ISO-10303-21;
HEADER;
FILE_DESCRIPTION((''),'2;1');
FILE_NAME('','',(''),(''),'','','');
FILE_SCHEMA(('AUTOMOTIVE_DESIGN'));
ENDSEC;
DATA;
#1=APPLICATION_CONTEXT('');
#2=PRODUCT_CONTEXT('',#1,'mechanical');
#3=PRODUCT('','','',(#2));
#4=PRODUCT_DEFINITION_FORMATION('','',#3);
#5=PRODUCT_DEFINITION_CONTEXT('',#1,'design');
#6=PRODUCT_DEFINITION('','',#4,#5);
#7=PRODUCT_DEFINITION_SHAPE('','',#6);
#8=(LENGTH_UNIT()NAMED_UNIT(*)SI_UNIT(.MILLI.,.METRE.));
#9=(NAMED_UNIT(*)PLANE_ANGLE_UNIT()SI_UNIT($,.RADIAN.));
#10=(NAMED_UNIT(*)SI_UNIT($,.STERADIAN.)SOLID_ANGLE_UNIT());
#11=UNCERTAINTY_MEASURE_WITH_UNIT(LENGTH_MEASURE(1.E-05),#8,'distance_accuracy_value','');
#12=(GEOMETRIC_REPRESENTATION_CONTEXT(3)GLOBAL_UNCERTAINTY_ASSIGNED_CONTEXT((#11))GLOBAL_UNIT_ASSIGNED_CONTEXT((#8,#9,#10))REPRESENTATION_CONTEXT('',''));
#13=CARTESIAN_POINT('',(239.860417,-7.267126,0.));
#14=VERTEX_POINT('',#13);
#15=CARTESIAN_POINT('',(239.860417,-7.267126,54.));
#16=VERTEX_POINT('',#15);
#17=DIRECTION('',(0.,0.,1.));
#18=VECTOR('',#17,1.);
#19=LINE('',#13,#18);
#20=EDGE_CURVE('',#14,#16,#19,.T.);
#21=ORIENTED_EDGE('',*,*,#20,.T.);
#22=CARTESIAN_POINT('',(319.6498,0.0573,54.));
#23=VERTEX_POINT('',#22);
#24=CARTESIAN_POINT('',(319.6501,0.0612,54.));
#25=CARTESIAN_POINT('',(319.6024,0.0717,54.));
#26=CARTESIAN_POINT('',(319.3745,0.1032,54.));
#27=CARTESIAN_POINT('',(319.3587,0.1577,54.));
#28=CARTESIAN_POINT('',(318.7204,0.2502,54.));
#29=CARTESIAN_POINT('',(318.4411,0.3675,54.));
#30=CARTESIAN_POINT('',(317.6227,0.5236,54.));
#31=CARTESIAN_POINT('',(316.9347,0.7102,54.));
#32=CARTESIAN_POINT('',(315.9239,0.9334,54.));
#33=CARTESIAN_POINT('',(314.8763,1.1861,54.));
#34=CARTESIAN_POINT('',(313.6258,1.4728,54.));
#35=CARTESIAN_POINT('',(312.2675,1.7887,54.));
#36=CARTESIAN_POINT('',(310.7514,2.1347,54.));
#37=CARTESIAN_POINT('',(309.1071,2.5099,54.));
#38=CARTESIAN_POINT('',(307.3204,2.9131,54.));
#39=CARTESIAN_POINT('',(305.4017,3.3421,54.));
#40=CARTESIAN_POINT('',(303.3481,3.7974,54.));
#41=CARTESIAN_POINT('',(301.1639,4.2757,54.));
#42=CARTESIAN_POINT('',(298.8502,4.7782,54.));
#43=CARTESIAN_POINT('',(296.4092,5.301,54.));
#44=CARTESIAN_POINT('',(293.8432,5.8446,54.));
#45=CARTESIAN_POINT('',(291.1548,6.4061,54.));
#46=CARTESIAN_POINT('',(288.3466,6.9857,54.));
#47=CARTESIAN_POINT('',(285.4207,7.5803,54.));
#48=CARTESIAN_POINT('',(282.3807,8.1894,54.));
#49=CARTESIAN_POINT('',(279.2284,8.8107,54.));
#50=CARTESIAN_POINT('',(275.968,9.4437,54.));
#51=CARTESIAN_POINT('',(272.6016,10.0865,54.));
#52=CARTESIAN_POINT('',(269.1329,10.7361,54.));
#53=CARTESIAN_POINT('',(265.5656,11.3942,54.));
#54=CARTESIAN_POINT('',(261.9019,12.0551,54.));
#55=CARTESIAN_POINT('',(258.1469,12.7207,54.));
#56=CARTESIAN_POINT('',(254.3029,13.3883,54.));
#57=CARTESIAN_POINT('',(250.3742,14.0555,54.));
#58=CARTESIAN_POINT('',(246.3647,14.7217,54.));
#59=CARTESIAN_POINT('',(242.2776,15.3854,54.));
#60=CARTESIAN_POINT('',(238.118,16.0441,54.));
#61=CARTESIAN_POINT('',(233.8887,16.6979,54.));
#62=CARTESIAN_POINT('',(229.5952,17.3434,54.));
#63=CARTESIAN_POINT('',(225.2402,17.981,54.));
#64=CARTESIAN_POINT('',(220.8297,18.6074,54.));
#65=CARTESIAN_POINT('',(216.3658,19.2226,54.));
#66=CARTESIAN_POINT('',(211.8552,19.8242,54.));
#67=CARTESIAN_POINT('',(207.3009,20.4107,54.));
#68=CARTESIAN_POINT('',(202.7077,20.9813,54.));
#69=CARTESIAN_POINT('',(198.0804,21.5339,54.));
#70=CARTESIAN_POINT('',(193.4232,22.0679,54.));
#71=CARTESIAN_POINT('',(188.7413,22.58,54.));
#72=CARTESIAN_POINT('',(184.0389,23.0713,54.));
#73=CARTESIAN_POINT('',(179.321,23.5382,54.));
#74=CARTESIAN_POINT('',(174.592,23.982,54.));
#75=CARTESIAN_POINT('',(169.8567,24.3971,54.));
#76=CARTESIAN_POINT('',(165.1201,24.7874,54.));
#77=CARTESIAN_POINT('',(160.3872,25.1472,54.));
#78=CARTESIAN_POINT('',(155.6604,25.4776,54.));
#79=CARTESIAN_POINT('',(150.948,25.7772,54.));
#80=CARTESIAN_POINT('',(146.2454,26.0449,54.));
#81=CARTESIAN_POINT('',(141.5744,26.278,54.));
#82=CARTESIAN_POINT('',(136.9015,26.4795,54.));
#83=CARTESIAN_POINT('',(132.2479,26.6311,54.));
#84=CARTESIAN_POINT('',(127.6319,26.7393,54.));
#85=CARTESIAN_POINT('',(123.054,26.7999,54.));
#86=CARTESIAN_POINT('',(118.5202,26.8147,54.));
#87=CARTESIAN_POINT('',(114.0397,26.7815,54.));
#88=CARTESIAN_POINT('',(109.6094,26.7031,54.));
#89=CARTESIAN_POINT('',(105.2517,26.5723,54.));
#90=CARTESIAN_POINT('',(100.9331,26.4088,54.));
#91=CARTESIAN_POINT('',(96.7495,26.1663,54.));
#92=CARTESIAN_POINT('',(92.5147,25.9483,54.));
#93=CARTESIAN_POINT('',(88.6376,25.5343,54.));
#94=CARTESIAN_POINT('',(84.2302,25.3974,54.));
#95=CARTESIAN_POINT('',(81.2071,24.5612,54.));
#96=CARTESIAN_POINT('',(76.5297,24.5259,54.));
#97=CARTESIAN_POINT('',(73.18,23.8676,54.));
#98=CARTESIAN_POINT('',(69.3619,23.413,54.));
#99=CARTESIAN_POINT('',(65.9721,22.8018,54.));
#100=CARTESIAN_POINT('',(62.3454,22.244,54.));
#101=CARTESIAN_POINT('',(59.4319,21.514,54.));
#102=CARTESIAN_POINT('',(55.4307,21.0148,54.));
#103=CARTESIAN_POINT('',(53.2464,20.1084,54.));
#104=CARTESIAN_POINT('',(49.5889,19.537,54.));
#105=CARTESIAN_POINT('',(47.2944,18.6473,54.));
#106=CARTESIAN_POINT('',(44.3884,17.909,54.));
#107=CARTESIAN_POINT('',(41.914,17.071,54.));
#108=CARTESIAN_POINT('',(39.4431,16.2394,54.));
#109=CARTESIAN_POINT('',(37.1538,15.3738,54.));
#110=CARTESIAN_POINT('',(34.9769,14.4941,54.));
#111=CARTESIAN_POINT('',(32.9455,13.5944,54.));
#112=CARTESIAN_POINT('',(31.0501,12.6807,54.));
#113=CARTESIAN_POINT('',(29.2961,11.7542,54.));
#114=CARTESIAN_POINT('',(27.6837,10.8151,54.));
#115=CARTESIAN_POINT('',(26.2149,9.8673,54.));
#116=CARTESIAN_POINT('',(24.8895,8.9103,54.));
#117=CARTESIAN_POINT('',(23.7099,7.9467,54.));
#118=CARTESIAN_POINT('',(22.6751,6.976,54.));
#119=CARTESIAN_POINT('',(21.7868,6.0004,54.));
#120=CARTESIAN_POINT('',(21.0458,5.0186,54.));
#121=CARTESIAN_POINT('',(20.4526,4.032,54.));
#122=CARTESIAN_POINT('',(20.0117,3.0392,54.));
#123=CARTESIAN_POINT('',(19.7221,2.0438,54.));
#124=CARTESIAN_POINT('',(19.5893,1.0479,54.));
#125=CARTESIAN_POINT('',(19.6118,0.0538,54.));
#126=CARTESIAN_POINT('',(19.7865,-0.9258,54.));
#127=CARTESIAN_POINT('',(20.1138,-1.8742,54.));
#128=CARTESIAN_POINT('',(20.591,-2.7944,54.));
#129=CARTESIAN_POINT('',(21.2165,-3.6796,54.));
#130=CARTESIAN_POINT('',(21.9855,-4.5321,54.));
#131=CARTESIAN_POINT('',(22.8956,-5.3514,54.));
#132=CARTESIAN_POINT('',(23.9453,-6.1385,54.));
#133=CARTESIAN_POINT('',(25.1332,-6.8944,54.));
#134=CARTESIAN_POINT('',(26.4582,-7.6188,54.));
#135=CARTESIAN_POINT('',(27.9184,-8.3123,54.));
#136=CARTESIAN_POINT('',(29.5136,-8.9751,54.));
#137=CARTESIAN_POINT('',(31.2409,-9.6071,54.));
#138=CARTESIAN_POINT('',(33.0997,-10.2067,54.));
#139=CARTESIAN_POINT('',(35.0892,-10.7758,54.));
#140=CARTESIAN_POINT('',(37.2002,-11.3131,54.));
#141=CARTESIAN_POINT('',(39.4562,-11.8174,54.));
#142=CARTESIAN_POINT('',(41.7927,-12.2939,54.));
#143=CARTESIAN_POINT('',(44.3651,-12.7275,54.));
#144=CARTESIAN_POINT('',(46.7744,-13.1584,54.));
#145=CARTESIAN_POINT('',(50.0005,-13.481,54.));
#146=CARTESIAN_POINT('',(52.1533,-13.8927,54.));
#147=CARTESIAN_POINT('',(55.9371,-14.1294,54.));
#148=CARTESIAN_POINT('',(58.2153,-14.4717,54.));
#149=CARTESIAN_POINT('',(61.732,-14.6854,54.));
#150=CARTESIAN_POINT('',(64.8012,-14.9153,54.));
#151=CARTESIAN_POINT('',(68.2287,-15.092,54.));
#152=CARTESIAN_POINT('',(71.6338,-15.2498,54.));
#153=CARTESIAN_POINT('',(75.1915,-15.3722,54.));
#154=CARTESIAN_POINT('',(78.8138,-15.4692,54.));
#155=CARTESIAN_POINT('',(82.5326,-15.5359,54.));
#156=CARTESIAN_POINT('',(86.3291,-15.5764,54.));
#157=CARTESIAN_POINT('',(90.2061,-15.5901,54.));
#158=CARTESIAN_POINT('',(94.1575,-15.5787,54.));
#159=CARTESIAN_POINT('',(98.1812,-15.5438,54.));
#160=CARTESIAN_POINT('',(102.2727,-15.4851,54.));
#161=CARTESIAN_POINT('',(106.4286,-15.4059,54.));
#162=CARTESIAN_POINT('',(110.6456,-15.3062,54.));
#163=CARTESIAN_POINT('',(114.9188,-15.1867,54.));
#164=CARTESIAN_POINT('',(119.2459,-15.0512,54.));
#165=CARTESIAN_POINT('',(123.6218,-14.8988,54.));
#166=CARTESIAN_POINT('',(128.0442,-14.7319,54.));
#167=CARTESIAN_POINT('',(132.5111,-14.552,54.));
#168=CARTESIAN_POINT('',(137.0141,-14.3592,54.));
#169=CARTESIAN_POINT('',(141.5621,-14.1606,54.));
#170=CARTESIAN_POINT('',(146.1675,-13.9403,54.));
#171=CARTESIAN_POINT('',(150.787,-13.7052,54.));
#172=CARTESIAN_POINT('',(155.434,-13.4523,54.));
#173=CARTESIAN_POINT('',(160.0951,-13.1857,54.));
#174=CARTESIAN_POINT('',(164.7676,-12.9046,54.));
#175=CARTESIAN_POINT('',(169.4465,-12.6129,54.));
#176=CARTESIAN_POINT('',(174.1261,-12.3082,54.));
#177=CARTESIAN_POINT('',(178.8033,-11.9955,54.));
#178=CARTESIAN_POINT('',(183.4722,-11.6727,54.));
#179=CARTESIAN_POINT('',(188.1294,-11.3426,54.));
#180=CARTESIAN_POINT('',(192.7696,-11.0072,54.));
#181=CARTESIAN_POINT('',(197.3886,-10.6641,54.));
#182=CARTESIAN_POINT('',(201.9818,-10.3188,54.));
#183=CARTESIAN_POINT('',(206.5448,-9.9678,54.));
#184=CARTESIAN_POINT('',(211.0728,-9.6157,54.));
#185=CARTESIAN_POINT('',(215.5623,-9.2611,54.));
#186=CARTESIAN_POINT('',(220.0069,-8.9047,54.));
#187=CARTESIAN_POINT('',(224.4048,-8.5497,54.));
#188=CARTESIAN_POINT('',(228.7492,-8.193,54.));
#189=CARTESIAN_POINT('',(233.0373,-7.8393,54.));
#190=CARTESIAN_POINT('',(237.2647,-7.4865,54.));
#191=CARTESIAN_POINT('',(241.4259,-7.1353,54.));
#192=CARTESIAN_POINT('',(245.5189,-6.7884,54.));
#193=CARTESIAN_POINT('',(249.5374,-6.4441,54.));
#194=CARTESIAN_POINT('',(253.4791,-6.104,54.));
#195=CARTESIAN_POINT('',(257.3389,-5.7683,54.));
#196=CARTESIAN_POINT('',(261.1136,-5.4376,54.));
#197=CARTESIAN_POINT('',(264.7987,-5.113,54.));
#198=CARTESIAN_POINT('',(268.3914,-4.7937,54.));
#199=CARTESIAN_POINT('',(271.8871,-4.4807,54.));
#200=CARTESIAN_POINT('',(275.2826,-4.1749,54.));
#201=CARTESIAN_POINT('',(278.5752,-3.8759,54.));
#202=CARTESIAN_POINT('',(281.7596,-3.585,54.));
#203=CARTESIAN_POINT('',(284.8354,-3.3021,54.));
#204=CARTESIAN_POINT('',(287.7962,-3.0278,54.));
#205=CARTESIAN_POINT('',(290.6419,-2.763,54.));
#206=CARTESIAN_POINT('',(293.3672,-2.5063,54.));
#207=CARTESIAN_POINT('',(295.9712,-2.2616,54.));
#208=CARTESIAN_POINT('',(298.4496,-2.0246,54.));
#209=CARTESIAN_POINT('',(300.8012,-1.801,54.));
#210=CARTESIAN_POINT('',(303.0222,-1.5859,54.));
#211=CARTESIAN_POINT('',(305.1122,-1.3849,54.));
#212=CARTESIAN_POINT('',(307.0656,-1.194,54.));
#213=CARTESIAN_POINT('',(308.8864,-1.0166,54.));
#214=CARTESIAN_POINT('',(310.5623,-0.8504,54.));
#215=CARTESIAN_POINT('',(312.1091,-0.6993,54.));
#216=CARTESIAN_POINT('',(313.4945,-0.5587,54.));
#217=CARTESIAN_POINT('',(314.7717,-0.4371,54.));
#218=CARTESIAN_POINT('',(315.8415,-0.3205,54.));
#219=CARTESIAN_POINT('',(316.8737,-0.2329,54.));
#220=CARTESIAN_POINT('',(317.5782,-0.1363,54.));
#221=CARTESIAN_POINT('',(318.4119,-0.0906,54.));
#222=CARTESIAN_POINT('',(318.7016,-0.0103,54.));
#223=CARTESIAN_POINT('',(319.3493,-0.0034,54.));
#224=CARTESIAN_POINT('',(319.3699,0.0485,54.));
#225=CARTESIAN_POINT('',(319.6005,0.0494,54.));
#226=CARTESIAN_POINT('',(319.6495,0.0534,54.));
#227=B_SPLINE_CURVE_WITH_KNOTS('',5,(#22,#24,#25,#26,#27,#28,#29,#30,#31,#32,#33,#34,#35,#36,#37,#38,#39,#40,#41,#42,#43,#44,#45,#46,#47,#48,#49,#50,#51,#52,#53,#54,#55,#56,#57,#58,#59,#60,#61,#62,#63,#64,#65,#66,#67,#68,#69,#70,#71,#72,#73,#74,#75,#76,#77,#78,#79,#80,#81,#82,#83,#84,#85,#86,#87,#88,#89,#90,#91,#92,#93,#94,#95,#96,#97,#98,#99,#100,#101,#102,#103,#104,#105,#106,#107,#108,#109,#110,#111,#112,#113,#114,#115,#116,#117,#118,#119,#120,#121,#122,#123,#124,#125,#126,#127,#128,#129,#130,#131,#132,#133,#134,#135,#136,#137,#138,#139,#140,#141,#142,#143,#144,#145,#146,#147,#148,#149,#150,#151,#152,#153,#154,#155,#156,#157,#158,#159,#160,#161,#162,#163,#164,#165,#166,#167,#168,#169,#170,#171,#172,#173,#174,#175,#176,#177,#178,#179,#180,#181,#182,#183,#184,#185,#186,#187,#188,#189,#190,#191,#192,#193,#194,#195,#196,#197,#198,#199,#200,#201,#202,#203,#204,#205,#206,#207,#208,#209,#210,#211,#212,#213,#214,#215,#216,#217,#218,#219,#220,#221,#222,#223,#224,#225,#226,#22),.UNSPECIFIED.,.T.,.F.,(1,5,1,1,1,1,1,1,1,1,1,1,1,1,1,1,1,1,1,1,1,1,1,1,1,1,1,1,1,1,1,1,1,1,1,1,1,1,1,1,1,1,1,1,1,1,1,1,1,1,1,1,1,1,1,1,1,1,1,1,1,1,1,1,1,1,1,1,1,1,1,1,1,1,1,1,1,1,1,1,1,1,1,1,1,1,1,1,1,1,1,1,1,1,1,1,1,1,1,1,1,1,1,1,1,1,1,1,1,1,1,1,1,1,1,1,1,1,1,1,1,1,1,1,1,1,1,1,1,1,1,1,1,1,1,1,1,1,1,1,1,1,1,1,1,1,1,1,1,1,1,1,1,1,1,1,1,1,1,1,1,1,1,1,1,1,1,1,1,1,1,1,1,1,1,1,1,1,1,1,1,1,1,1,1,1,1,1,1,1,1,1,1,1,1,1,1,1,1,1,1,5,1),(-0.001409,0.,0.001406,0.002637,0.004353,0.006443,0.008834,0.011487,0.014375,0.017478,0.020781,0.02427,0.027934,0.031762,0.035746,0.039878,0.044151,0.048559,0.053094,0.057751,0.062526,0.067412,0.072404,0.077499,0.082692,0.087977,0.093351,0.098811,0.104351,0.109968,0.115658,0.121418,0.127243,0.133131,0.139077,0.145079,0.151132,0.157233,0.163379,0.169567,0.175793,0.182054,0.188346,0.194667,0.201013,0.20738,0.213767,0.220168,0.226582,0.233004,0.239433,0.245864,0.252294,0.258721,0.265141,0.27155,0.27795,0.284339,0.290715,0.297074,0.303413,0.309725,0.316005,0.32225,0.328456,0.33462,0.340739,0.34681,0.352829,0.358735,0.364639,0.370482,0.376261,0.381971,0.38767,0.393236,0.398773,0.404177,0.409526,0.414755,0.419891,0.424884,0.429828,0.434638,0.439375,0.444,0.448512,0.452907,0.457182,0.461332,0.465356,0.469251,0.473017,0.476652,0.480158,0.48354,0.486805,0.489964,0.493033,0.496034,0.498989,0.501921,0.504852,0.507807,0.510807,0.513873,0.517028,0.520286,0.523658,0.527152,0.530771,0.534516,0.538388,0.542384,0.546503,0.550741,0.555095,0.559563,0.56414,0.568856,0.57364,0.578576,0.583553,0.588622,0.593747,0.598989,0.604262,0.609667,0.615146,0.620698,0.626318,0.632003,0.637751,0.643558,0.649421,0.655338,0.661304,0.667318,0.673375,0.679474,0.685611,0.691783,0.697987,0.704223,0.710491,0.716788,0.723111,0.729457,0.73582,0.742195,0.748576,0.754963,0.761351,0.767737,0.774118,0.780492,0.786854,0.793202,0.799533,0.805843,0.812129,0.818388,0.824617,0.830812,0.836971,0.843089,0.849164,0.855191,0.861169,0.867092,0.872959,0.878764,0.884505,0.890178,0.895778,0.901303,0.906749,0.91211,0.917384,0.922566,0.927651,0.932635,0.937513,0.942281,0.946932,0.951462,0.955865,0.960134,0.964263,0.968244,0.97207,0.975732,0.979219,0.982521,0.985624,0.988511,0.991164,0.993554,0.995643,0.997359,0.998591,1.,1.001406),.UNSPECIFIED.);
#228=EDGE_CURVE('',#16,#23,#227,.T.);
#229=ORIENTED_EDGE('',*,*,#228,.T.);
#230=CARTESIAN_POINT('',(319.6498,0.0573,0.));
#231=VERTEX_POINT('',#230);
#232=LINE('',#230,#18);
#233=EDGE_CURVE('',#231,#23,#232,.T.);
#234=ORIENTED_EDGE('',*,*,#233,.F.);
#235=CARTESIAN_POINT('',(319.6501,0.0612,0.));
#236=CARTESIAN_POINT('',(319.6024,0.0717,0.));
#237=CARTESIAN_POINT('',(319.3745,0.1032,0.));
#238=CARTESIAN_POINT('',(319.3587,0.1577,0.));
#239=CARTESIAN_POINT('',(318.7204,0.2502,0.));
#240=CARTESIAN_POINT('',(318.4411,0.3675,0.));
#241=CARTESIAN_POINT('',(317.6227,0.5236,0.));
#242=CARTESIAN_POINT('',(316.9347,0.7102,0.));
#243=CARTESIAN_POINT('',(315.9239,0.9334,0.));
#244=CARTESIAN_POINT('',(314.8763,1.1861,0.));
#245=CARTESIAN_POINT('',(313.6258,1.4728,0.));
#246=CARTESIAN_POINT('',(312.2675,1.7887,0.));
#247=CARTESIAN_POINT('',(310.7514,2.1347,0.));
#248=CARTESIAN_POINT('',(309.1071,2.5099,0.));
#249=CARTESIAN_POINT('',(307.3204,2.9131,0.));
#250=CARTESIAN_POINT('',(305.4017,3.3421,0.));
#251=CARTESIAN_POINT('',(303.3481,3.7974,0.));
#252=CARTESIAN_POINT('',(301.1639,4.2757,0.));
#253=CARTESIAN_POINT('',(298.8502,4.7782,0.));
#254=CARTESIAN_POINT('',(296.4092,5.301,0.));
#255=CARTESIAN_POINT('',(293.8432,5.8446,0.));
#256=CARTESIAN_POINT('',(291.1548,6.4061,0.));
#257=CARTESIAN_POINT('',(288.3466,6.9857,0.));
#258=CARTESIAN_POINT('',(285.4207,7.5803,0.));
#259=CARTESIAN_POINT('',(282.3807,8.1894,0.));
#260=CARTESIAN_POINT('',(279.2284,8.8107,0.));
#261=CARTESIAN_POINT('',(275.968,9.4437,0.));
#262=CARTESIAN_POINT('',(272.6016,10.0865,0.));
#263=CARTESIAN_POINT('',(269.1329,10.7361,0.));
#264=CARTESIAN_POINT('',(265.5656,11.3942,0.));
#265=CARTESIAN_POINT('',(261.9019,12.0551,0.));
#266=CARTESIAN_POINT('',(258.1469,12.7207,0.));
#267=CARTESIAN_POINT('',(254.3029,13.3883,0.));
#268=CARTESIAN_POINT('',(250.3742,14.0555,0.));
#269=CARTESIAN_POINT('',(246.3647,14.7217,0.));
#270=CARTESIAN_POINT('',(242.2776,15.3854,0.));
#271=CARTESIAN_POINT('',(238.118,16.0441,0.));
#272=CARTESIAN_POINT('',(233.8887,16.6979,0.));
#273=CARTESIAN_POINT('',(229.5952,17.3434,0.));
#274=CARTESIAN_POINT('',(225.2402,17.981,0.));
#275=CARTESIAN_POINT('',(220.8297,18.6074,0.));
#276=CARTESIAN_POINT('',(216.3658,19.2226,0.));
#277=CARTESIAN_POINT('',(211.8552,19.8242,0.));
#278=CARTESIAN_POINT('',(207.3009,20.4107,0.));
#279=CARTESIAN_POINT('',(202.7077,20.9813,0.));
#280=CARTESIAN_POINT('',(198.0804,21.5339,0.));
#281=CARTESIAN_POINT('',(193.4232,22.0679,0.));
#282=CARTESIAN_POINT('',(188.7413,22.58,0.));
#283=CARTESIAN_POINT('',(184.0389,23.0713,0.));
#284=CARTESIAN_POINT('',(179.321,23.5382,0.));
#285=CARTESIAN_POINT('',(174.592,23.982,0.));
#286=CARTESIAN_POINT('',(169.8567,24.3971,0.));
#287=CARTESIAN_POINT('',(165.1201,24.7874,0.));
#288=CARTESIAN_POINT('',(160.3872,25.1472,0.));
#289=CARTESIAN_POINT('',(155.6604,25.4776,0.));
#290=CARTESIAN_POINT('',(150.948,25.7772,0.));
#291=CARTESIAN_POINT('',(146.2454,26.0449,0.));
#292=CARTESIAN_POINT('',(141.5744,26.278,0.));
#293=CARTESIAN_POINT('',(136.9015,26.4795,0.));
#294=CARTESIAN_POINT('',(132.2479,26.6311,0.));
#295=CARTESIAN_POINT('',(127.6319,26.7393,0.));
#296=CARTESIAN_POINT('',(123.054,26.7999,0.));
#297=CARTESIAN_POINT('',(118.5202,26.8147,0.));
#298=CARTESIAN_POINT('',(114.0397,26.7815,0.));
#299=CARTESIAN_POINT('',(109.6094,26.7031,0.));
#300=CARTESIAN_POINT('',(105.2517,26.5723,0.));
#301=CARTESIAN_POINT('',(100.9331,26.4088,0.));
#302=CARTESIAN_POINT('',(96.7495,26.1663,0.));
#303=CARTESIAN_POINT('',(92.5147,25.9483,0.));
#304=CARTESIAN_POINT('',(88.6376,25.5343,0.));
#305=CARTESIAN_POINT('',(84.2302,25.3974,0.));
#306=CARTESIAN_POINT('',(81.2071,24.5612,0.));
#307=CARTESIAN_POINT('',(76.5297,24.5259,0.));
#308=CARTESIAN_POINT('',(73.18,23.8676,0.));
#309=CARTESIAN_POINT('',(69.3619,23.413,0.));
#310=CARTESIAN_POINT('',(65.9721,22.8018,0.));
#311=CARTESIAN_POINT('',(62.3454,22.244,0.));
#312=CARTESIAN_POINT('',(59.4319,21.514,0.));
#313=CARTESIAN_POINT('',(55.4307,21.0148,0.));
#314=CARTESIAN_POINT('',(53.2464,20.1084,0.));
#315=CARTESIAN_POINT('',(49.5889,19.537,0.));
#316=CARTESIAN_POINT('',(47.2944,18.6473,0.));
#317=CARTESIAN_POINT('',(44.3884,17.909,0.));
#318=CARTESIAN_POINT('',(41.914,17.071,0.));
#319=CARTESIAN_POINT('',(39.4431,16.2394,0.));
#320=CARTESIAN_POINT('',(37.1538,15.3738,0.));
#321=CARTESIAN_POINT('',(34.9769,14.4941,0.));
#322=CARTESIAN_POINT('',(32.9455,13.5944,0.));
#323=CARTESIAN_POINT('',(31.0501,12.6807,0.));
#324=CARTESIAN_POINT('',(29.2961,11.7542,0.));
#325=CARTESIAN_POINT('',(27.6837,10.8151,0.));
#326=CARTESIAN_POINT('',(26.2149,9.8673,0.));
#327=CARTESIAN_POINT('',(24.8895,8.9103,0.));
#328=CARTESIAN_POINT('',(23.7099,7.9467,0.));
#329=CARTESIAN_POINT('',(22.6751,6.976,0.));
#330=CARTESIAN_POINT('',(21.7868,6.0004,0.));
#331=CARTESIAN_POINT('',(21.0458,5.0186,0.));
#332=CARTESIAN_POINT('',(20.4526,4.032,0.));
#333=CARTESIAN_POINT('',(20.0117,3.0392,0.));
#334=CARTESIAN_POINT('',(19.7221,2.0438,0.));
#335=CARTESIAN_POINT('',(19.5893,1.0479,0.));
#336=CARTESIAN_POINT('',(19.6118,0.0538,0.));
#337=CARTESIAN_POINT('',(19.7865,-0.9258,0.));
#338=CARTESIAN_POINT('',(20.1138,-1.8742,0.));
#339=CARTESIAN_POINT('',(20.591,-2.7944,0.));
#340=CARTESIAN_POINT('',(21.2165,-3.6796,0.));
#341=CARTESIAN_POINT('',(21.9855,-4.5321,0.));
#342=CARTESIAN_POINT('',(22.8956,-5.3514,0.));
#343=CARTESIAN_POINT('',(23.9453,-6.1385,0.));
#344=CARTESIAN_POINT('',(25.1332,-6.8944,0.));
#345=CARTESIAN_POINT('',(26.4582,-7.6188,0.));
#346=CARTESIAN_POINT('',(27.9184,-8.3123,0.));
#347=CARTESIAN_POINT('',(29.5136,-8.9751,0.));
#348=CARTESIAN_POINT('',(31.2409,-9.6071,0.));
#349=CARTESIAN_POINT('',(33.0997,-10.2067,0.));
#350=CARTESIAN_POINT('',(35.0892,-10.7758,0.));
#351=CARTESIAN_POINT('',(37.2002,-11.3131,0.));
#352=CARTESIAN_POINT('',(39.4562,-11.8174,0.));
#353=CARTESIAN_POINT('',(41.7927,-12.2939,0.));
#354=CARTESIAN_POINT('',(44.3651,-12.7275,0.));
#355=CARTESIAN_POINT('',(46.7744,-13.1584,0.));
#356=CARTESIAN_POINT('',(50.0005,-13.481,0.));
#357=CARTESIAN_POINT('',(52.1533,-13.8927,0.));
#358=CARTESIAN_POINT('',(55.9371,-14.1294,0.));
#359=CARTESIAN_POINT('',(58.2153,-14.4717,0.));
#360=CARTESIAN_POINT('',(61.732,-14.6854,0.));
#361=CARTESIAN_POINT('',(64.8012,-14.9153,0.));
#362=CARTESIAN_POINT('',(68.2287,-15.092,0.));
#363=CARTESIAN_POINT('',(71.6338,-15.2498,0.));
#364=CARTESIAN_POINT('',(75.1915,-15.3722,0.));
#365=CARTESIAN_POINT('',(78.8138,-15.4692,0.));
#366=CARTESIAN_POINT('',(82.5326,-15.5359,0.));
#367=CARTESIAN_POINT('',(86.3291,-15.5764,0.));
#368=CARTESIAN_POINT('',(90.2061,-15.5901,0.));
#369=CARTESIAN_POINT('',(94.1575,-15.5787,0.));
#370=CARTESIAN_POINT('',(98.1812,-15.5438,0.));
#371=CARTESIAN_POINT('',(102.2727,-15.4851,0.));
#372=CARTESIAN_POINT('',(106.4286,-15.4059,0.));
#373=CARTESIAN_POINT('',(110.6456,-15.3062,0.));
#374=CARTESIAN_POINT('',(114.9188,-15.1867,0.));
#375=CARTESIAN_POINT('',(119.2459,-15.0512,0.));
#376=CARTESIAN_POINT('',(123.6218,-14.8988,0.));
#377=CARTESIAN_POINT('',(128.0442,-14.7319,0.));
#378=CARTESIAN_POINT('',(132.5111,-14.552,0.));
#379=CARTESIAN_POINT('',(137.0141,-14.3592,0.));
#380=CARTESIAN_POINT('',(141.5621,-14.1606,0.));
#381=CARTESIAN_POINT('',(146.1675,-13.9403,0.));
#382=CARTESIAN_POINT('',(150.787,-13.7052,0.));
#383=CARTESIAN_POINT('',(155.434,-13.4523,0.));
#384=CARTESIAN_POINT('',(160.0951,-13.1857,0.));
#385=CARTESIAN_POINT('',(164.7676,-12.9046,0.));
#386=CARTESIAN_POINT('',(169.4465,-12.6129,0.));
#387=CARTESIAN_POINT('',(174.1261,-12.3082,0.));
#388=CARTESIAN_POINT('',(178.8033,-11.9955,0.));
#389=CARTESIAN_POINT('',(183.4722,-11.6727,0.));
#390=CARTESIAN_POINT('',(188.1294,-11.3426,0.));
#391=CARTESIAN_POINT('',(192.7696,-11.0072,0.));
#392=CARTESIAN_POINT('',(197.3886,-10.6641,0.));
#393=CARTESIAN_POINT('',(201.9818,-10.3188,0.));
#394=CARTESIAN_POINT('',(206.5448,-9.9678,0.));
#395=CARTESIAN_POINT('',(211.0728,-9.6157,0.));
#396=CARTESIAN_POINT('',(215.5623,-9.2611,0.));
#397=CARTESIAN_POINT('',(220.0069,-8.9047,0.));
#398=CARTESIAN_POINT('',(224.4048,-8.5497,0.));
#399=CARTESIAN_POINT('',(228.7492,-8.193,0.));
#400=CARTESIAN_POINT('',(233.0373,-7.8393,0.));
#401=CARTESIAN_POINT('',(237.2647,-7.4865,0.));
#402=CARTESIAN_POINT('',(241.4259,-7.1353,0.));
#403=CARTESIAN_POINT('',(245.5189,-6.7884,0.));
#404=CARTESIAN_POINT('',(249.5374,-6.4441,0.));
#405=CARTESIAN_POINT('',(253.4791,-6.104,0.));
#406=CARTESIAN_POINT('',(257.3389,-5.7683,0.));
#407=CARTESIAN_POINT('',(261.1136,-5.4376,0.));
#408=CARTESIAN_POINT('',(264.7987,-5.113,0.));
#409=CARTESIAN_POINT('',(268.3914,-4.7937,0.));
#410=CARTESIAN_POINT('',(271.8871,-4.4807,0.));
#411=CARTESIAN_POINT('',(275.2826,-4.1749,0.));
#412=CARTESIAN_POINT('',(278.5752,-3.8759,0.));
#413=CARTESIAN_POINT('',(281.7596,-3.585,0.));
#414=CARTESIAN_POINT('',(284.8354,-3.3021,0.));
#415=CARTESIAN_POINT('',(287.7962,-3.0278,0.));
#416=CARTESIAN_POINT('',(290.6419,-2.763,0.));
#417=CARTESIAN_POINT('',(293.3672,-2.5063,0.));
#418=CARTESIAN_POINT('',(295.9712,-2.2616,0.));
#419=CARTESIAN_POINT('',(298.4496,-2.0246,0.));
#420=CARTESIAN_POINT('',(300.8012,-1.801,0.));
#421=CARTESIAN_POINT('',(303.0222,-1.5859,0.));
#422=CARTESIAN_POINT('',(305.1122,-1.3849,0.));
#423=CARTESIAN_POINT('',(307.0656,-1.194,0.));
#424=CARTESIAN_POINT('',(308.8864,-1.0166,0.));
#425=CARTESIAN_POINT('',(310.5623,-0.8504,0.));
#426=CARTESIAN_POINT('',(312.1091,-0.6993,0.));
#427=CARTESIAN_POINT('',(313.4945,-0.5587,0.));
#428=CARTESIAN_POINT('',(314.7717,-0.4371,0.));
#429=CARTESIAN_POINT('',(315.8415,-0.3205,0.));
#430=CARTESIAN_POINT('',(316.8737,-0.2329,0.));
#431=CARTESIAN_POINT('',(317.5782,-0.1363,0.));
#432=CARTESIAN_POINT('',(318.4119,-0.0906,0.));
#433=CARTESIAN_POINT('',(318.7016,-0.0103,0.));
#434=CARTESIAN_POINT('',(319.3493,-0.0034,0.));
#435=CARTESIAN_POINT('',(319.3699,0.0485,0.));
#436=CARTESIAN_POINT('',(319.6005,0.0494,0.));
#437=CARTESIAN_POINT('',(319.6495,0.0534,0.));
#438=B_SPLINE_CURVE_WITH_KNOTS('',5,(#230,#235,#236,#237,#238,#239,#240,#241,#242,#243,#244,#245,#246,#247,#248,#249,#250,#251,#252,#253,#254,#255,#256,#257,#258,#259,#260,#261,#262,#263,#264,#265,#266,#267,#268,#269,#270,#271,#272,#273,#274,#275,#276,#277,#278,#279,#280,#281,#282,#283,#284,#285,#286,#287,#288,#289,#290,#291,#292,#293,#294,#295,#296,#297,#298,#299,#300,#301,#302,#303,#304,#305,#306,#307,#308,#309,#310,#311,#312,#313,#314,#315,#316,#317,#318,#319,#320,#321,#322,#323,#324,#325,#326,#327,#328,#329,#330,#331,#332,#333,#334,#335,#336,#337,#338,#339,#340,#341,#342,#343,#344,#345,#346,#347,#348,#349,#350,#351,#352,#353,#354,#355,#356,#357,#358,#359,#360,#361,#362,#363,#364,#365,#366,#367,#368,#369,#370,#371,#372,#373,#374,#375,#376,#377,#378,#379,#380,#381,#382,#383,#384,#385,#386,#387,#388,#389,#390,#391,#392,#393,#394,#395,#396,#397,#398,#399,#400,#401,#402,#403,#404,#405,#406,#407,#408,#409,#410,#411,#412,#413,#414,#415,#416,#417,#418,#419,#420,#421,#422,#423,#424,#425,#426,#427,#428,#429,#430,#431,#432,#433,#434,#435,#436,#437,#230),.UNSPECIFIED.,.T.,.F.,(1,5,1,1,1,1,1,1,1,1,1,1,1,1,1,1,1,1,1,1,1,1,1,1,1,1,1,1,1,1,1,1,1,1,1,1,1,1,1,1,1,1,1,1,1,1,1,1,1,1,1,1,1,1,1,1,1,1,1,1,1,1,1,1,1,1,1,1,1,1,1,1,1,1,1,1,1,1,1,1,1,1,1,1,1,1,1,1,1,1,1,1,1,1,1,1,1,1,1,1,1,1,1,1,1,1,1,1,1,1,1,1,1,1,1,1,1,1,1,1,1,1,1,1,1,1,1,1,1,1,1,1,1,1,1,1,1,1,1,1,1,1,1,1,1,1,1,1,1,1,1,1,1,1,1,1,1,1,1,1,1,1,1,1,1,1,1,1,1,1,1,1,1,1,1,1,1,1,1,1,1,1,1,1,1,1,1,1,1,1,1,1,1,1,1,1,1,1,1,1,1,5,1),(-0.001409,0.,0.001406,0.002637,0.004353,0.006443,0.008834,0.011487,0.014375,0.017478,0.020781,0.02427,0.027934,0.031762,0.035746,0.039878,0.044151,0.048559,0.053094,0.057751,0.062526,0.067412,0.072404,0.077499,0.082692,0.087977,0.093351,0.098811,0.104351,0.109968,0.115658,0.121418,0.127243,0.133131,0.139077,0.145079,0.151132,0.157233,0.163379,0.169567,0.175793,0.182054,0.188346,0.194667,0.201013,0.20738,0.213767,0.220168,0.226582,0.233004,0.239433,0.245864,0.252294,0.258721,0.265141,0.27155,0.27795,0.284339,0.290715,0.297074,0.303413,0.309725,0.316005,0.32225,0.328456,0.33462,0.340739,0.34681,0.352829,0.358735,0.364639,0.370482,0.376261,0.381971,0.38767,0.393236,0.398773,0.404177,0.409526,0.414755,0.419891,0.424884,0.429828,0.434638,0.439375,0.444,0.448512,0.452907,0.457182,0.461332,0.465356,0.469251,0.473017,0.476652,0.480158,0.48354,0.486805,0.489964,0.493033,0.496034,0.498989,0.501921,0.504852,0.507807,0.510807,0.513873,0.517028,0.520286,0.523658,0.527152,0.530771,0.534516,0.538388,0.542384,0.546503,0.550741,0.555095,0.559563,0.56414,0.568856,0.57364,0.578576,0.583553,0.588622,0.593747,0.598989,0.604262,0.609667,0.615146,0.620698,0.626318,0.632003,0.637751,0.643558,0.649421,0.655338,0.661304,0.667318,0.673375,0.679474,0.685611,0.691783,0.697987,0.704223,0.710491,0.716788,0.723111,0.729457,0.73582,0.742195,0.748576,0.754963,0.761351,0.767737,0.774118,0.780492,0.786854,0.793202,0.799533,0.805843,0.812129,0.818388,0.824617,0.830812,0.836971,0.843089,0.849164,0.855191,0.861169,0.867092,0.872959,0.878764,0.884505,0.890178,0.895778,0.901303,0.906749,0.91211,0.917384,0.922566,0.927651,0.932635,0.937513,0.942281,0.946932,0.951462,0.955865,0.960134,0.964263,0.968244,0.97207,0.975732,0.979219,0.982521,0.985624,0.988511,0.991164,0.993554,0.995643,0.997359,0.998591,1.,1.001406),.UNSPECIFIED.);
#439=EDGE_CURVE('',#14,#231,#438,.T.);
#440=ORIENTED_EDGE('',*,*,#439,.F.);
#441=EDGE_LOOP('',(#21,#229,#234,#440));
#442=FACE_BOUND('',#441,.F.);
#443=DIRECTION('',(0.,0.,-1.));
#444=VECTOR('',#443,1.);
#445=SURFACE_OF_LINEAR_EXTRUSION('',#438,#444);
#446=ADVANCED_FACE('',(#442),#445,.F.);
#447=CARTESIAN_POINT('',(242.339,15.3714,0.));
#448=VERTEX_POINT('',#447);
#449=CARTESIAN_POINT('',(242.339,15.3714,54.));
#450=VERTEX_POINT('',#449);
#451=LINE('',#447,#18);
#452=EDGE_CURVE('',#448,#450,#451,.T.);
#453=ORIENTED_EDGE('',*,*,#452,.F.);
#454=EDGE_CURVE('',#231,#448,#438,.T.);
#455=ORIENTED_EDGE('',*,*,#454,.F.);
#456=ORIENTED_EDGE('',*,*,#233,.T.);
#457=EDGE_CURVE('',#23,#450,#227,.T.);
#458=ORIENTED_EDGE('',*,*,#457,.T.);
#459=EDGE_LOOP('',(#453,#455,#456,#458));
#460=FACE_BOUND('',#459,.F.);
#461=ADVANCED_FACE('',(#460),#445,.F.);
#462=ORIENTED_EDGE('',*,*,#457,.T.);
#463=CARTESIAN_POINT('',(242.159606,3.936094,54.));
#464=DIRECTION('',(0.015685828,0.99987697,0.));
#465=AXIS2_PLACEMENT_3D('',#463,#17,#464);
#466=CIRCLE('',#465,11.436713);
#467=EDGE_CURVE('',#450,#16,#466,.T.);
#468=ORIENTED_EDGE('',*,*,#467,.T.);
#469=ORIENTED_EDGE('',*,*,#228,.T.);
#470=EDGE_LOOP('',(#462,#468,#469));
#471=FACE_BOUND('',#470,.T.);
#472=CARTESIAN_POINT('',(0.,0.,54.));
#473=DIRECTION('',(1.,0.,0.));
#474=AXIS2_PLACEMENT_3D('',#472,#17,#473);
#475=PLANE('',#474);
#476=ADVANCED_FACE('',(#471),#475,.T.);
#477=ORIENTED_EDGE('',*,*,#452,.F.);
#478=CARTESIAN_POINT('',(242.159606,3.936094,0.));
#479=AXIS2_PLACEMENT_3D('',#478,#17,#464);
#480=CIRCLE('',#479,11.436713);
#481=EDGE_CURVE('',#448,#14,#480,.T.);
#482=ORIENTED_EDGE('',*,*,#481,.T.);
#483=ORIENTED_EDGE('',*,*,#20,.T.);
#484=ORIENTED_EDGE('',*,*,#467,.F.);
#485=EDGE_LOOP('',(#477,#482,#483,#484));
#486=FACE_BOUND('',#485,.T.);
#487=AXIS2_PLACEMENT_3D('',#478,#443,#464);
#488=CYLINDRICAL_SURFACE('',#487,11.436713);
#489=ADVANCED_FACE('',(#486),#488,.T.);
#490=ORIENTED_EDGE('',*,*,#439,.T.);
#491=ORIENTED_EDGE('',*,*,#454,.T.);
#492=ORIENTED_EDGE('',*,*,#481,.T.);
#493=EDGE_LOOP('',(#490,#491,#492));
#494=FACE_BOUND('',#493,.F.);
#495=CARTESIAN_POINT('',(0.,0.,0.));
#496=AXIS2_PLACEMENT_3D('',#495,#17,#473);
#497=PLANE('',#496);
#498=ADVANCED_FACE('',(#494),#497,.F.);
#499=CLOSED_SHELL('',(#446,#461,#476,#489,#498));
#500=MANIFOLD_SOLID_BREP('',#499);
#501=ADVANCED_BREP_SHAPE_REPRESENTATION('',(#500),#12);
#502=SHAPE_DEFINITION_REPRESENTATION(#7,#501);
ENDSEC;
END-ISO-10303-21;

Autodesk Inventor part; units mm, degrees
ref_plane "YZ Plane" through (0, 0, 0) normal (1, 0, 0) x (0, 1, 0)
ref_plane "XZ Plane" through (0, 0, 0) normal (0, 1, 0) x (-1, 0, 0)
ref_plane "XY Plane" through (0, 0, 0) normal (0, 0, 1) x (1, 0, 0)
sketch "Sketch2" plane through (0, 0, 0) normal (0, 0, 1) x (1, 0, 0)
  spline S0 degree 5 poles (319.6498, 0.0573) (319.6501, 0.0612) (319.6024, 0.0717) (319.3745, 0.1032) (319.3587, 0.1577) (318.7204, 0.2502) (318.4411, 0.3675) (317.6227, 0.5236) (316.9347, 0.7102) (315.9239, 0.9334) (314.8763, 1.1861) (313.6258, 1.4728) (312.2675, 1.7887) (310.7514, 2.1347) (309.1071, 2.5099) (307.3204, 2.9131) (305.4017, 3.3421) (303.3481, 3.7974) (301.1639, 4.2757) (298.8502, 4.7782) (296.4092, 5.301) (293.8432, 5.8446) (291.1548, 6.4061) (288.3466, 6.9857) (285.4207, 7.5803) (282.3807, 8.1894) (279.2284, 8.8107) (275.968, 9.4437) (272.6016, 10.0865) (269.1329, 10.7361) (265.5656, 11.3942) (261.9019, 12.0551) (258.1469, 12.7207) (254.3029, 13.3883) (250.3742, 14.0555) (246.3647, 14.7217) (242.2776, 15.3854) (238.118, 16.0441) (233.8887, 16.6979) (229.5952, 17.3434) (225.2402, 17.981) (220.8297, 18.6074) (216.3658, 19.2226) (211.8552, 19.8242) (207.3009, 20.4107) (202.7077, 20.9813) (198.0804, 21.5339) (193.4232, 22.0679) (188.7413, 22.58) (184.0389, 23.0713) (179.321, 23.5382) (174.592, 23.982) (169.8567, 24.3971) (165.1201, 24.7874) (160.3872, 25.1472) (155.6604, 25.4776) (150.948, 25.7772) (146.2454, 26.0449) (141.5744, 26.278) (136.9015, 26.4795) (132.2479, 26.6311) (127.6319, 26.7393) (123.054, 26.7999) (118.5202, 26.8147) (114.0397, 26.7815) (109.6094, 26.7031) (105.2517, 26.5723) (100.9331, 26.4088) (96.7495, 26.1663) (92.5147, 25.9483) (88.6376, 25.5343) (84.2302, 25.3974) (81.2071, 24.5612) (76.5297, 24.5259) (73.18, 23.8676) (69.3619, 23.413) (65.9721, 22.8018) (62.3454, 22.244) (59.4319, 21.514) (55.4307, 21.0148) (53.2464, 20.1084) (49.5889, 19.537) (47.2944, 18.6473) (44.3884, 17.909) (41.914, 17.071) (39.4431, 16.2394) (37.1538, 15.3738) (34.9769, 14.4941) (32.9455, 13.5944) (31.0501, 12.6807) (29.2961, 11.7542) (27.6837, 10.8151) (26.2149, 9.8673) (24.8895, 8.9103) (23.7099, 7.9467) (22.6751, 6.976) (21.7868, 6.0004) (21.0458, 5.0186) (20.4526, 4.032) (20.0117, 3.0392) (19.7221, 2.0438) (19.5893, 1.0479) (19.6118, 0.0538) (19.7865, -0.9258) (20.1138, -1.8742) (20.591, -2.7944) (21.2165, -3.6796) (21.9855, -4.5321) (22.8956, -5.3514) (23.9453, -6.1385) (25.1332, -6.8944) (26.4582, -7.6188) (27.9184, -8.3123) (29.5136, -8.9751) (31.2409, -9.6071) (33.0997, -10.2067) (35.0892, -10.7758) (37.2002, -11.3131) (39.4562, -11.8174) (41.7927, -12.2939) (44.3651, -12.7275) (46.7744, -13.1584) (50.0005, -13.481) (52.1533, -13.8927) (55.9371, -14.1294) (58.2153, -14.4717) (61.732, -14.6854) (64.8012, -14.9153) (68.2287, -15.092) (71.6338, -15.2498) (75.1915, -15.3722) (78.8138, -15.4692) (82.5326, -15.5359) (86.3291, -15.5764) (90.2061, -15.5901) (94.1575, -15.5787) (98.1812, -15.5438) (102.2727, -15.4851) (106.4286, -15.4059) (110.6456, -15.3062) (114.9188, -15.1867) (119.2459, -15.0512) (123.6218, -14.8988) (128.0442, -14.7319) (132.5111, -14.552) (137.0141, -14.3592) (141.5621, -14.1606) (146.1675, -13.9403) (150.787, -13.7052) (155.434, -13.4523) (160.0951, -13.1857) (164.7676, -12.9046) (169.4465, -12.6129) (174.1261, -12.3082) (178.8033, -11.9955) (183.4722, -11.6727) (188.1294, -11.3426) (192.7696, -11.0072) (197.3886, -10.6641) (201.9818, -10.3188) (206.5448, -9.9678) (211.0728, -9.6157) (215.5623, -9.2611) (220.0069, -8.9047) (224.4048, -8.5497) (228.7492, -8.193) (233.0373, -7.8393) (237.2647, -7.4865) (241.4259, -7.1353) (245.5189, -6.7884) (249.5374, -6.4441) (253.4791, -6.104) (257.3389, -5.7683) (261.1136, -5.4376) (264.7987, -5.113) (268.3914, -4.7937) (271.8871, -4.4807) (275.2826, -4.1749) (278.5752, -3.8759) (281.7596, -3.585) (284.8354, -3.3021) (287.7962, -3.0278) (290.6419, -2.763) (293.3672, -2.5063) (295.9712, -2.2616) (298.4496, -2.0246) (300.8012, -1.801) (303.0222, -1.5859) (305.1122, -1.3849) (307.0656, -1.194) (308.8864, -1.0166) (310.5623, -0.8504) (312.1091, -0.6993) (313.4945, -0.5587) (314.7717, -0.4371) (315.8415, -0.3205) (316.8737, -0.2329) (317.5782, -0.1363) (318.4119, -0.0906) (318.7016, -0.0103) (319.3493, -0.0034) (319.3699, 0.0485) (319.6005, 0.0494) (319.6495, 0.0534) (319.6498, 0.0573) knots 0 0 0 0 0 0 0.001406 0.002637 0.004353 0.006443 0.008834 0.011487 0.014375 0.017478 0.020781 0.02427 0.027934 0.031762 0.035746 0.039878 0.044151 0.048559 0.053094 0.057751 0.062526 0.067412 0.072404 0.077499 0.082692 0.087977 0.093351 0.098811 0.104351 0.109968 0.115658 0.121418 0.127243 0.133131 0.139077 0.145079 0.151132 0.157233 0.163379 0.169567 0.175793 0.182054 0.188346 0.194667 0.201013 0.20738 0.213767 0.220168 0.226582 0.233004 0.239433 0.245864 0.252294 0.258721 0.265141 0.27155 0.27795 0.284339 0.290715 0.297074 0.303413 0.309725 0.316005 0.32225 0.328456 0.33462 0.340739 0.34681 0.352829 0.358735 0.364639 0.370482 0.376261 0.381971 0.38767 0.393236 0.398773 0.404177 0.409526 0.414755 0.419891 0.424884 0.429828 0.434638 0.439375 0.444 0.448512 0.452907 0.457182 0.461332 0.465356 0.469251 0.473017 0.476652 0.480158 0.48354 0.486805 0.489964 0.493033 0.496034 0.498989 0.501921 0.504852 0.507807 0.510807 0.513873 0.517028 0.520286 0.523658 0.527152 0.530771 0.534516 0.538388 0.542384 0.546503 0.550741 0.555095 0.559563 0.56414 0.568856 0.57364 0.578576 0.583553 0.588622 0.593747 0.598989 0.604262 0.609667 0.615146 0.620698 0.626318 0.632003 0.637751 0.643558 0.649421 0.655338 0.661304 0.667318 0.673375 0.679474 0.685611 0.691783 0.697987 0.704223 0.710491 0.716788 0.723111 0.729457 0.73582 0.742195 0.748576 0.754963 0.761351 0.767737 0.774118 0.780492 0.786854 0.793202 0.799533 0.805843 0.812129 0.818388 0.824617 0.830812 0.836971 0.843089 0.849164 0.855191 0.861169 0.867092 0.872959 0.878764 0.884505 0.890178 0.895778 0.901303 0.906749 0.91211 0.917384 0.922566 0.927651 0.932635 0.937513 0.942281 0.946932 0.951462 0.955865 0.960134 0.964263 0.968244 0.97207 0.975732 0.979219 0.982521 0.985624 0.988511 0.991164 0.993554 0.995643 0.997359 0.998591 1 1 1 1 1 1
  circle A0 centre (83.0595, 4.5678) radius 11.5675
  line L0 (83.0595, 4.5678) -> (83.0595, 25.0384) construction
  line L1 (83.0595, 4.5678) -> (209.6498, 4.5678) construction
  line L2 (319.6498, 0.0573) -> (219.6498, 0.0573) construction
  line L3 (219.6499, 18.7671) -> (219.6499, -8.9327) construction
  line L4 (28.0055, 4.5054) -> (28.0055, -2.4946)
  line L5 (19.627, 1.0326) -> (319.6498, 0.0573) construction
  line L6 (49.7105, 14.4213) -> (55.6079, 14.4213)
  line L7 (49.7104, -8.4915) -> (55.6078, -8.4915)
  line L8 (28.0055, 4.5054) -> (49.7105, 14.4213)
  line L9 (28.0055, -2.4946) -> (49.7104, -8.4915)
  line L10 (55.6079, 14.4213) -> (55.6079, 20.8726)
  line L11 (55.6078, -8.4915) -> (55.6078, -14.1513)
  line L12 (108.6496, 16.3299) -> (108.6496, -7.1942)
  line L13 (110.8735, -9.1817) -> (193.8736, 0.1678)
  line L14 (195.6498, 2.1552) -> (195.6498, 6.9805)
  line L15 (193.8736, 8.9679) -> (110.8735, 18.3173)
  arc A1 (110.8735, 18.3173) -> (108.6496, 16.3299) centre (110.6496, 16.3299) ccw
  arc A2 (108.6496, -7.1942) -> (110.8735, -9.1817) centre (110.6496, -7.1942) ccw
  arc A3 (193.8736, 0.1678) -> (195.6498, 2.1552) centre (193.6498, 2.1552) ccw
  arc A4 (195.6498, 6.9805) -> (193.8736, 8.9679) centre (193.6498, 6.9805) ccw
  circle A5 centre (209.6498, 0.0573) radius 3
  line L16 (319.6498, 0.0573) -> (229.6498, 0.0573) construction
  arc A6 (242.339, 15.3714) -> (241.4866, -7.4808) centre (242.1596, 3.9361) ccw
  point P0 (0, 0)
  point P1 (319.3573, 0.1272)
  point P2 (318.9918, 0.2142)
  point P3 (318.4802, 0.3354)
  point P4 (317.8238, 0.4911)
  point P5 (317.0222, 0.6801)
  point P6 (316.0769, 0.9024)
  point P7 (314.9885, 1.1568)
  point P8 (313.7582, 1.443)
  point P9 (312.3866, 1.7598)
  point P10 (310.8752, 2.1063)
  point P11 (309.2258, 2.4819)
  point P12 (307.4393, 2.8854)
  point P13 (305.5178, 3.3153)
  point P14 (303.4628, 3.7707)
  point P15 (301.2764, 4.2501)
  point P16 (298.9607, 4.7526)
  point P17 (296.5175, 5.2764)
  point P18 (293.9492, 5.8203)
  point P19 (291.2585, 6.3828)
  point P20 (288.4478, 6.9627)
  point P21 (285.5195, 7.5582)
  point P22 (282.4766, 8.1678)
  point P23 (279.3218, 8.79)
  point P24 (276.0584, 9.4236)
  point P25 (272.6891, 10.0668)
  point P26 (269.2175, 10.7178)
  point P27 (265.6469, 11.3757)
  point P28 (261.9803, 12.0381)
  point P29 (258.2219, 12.7041)
  point P30 (254.3747, 13.3722)
  point P31 (250.4426, 14.0403)
  point P32 (246.4295, 14.7072)
  point P33 (238.1756, 16.0311)
  point P34 (233.9428, 16.6851)
  point P35 (229.6454, 17.3316)
  point P36 (225.2869, 17.9694)
  point P37 (220.8723, 18.5967)
  point P38 (216.4049, 19.2123)
  point P39 (211.8901, 19.8144)
  point P40 (207.332, 20.4015)
  point P41 (202.7347, 20.9724)
  point P42 (198.1034, 21.5256)
  point P43 (193.4423, 22.0596)
  point P44 (188.7563, 22.5726)
  point P45 (184.0499, 23.0637)
  point P46 (179.3279, 23.5314)
  point P47 (174.5948, 23.9745)
  point P48 (169.8554, 24.3909)
  point P49 (165.1148, 24.7803)
  point P50 (160.3775, 25.1406)
  point P51 (155.6479, 25.4709)
  point P52 (150.9316, 25.7703)
  point P53 (146.233, 26.0373)
  point P54 (141.557, 26.2707)
  point P55 (136.882, 26.4681)
  point P56 (132.2209, 26.6211)
  point P57 (127.5964, 26.7282)
  point P58 (123.0133, 26.7888)
  point P59 (118.4761, 26.8026)
  point P60 (113.9902, 26.7693)
  point P61 (109.5601, 26.6886)
  point P62 (105.191, 26.5611)
  point P63 (100.8866, 26.3866)
  point P64 (96.6524, 26.1647)
  point P65 (92.4927, 25.8975)
  point P66 (88.4121, 25.5832)
  point P67 (84.4152, 25.2282)
  point P68 (80.9052, 24.7441)
  point P69 (76.6873, 24.3761)
  point P70 (72.9635, 23.8905)
  point P71 (69.3402, 23.3611)
  point P72 (65.8208, 22.7938)
  point P73 (62.4086, 22.1883)
  point P74 (59.107, 21.5464)
  point P75 (52.8493, 20.1606)
  point P76 (49.7105, 19.4213)
  point P77 (47.0737, 18.6507)
  point P78 (44.3741, 17.8542)
  point P79 (41.8034, 17.0322)
  point P80 (39.3638, 16.1874)
  point P81 (37.0583, 15.3213)
  point P82 (34.8884, 14.4363)
  point P83 (32.8568, 13.534)
  point P84 (30.965, 12.6166)
  point P85 (29.2145, 11.686)
  point P86 (27.6071, 10.7437)
  point P87 (26.1443, 9.7921)
  point P88 (24.8269, 8.8324)
  point P89 (23.6566, 7.8664)
  point P90 (22.6336, 6.8953)
  point P91 (21.7591, 5.9209)
  point P92 (21.0334, 4.9441)
  point P93 (20.4571, 3.9661)
  point P94 (20.0308, 2.9875)
  point P95 (19.7539, 2.0098)
  point P96 (19.6496, 0.0573)
  point P97 (19.8205, -0.9033)
  point P98 (20.1376, -1.8357)
  point P99 (20.6002, -2.7402)
  point P100 (21.208, -3.6159)
  point P101 (21.9598, -4.4628)
  point P102 (22.8544, -5.2806)
  point P103 (23.8909, -6.069)
  point P104 (25.0681, -6.8277)
  point P105 (26.3846, -7.5561)
  point P106 (27.8384, -8.2539)
  point P107 (29.4284, -8.9211)
  point P108 (31.1522, -9.5571)
  point P109 (33.0086, -10.1613)
  point P110 (34.9949, -10.734)
  point P111 (37.1093, -11.2746)
  point P112 (39.3497, -11.7828)
  point P113 (41.7134, -12.2586)
  point P114 (44.198, -12.702)
  point P115 (46.8014, -13.1127)
  point P116 (49.7104, -13.4915)
  point P117 (52.3532, -13.8357)
  point P118 (58.3469, -14.4294)
  point P119 (61.5023, -14.6781)
  point P120 (64.7591, -14.8953)
  point P121 (68.1149, -15.0813)
  point P122 (71.5661, -15.237)
  point P123 (75.1094, -15.3627)
  point P124 (78.7418, -15.4596)
  point P125 (82.46, -15.528)
  point P126 (86.2607, -15.5691)
  point P127 (90.14, -15.5838)
  point P128 (94.0946, -15.5733)
  point P129 (98.1212, -15.5388)
  point P130 (102.2159, -15.4812)
  point P131 (106.3751, -15.4023)
  point P132 (110.5952, -15.303)
  point P133 (114.872, -15.1845)
  point P134 (119.2022, -15.0489)
  point P135 (123.5813, -14.8971)
  point P136 (128.006, -14.7306)
  point P137 (132.4718, -14.5509)
  point P138 (136.9748, -14.3598)
  point P139 (141.5285, -14.1576)
  point P140 (146.1365, -13.9383)
  point P141 (150.7679, -13.7022)
  point P142 (155.4191, -13.4499)
  point P143 (160.0853, -13.1829)
  point P144 (164.7617, -12.9024)
  point P145 (169.4444, -12.6099)
  point P146 (174.1283, -12.306)
  point P147 (178.8092, -11.9925)
  point P148 (183.4823, -11.67)
  point P149 (188.1434, -11.34)
  point P150 (192.7877, -11.0037)
  point P151 (197.4106, -10.6614)
  point P152 (202.0079, -10.3149)
  point P153 (206.5747, -9.9645)
  point P154 (211.1069, -9.6117)
  point P155 (215.5999, -9.2568)
  point P156 (220.0489, -8.9007)
  point P157 (224.4503, -8.5446)
  point P158 (228.7987, -8.1885)
  point P159 (233.0906, -7.8339)
  point P160 (237.3214, -7.4808)
  point P161 (241.4866, -7.1298)
  point P162 (245.5828, -6.7821)
  point P163 (249.6052, -6.4377)
  point P164 (253.5502, -6.0972)
  point P165 (257.4136, -5.7612)
  point P166 (261.1915, -5.4303)
  point P167 (264.88, -5.1051)
  point P168 (268.4758, -4.7856)
  point P169 (271.9747, -4.4724)
  point P170 (275.3734, -4.1661)
  point P171 (278.6686, -3.867)
  point P172 (281.8564, -3.5757)
  point P173 (284.9344, -3.2925)
  point P174 (287.8984, -3.018)
  point P175 (290.7463, -2.7525)
  point P176 (293.4745, -2.4963)
  point P177 (296.0806, -2.2503)
  point P178 (298.5616, -2.0142)
  point P179 (300.9151, -1.7892)
  point P180 (303.1387, -1.575)
  point P181 (305.23, -1.3728)
  point P182 (307.1866, -1.1823)
  point P183 (309.007, -1.0041)
  point P184 (310.6885, -0.8385)
  point P185 (312.2302, -0.6861)
  point P186 (313.6297, -0.5472)
  point P187 (314.8861, -0.4221)
  point P188 (315.9976, -0.3108)
  point P189 (316.9636, -0.2139)
  point P190 (317.7826, -0.1314)
  point P191 (318.4537, -0.0636)
  point P192 (318.9766, -0.0108)
  point P193 (319.3503, 0.027)
  point P194 (319.5743, 0.0498)
  point P195 (28.0055, 1.0054)
  point P196 (108.6496, 18.5678)
  point P197 (108.6496, -9.4322)
  point P198 (195.6498, 0.3678)
  point P199 (195.6498, 8.7678)
  dimension "d2" = 300.0001
  dimension "d22" = 100
  dimension "d23" = 7
  dimension "d24" = 5
  dimension "d25" = 5
  dimension "d30" = 28
  dimension "d31" = 8.4
  dimension "d34" = 2
  dimension "d37" = 23.135
  dimension "d43" = 63.4325
  dimension "d44" = 6
  dimension "d45" = 110
  dimension "d46" = 90
extrude "Extrusion6" add sketch "Sketch2" along normal blind 54 contours S0 A6
properties part number "2414 basic aerofoil" material "Polyurethane Foam"
